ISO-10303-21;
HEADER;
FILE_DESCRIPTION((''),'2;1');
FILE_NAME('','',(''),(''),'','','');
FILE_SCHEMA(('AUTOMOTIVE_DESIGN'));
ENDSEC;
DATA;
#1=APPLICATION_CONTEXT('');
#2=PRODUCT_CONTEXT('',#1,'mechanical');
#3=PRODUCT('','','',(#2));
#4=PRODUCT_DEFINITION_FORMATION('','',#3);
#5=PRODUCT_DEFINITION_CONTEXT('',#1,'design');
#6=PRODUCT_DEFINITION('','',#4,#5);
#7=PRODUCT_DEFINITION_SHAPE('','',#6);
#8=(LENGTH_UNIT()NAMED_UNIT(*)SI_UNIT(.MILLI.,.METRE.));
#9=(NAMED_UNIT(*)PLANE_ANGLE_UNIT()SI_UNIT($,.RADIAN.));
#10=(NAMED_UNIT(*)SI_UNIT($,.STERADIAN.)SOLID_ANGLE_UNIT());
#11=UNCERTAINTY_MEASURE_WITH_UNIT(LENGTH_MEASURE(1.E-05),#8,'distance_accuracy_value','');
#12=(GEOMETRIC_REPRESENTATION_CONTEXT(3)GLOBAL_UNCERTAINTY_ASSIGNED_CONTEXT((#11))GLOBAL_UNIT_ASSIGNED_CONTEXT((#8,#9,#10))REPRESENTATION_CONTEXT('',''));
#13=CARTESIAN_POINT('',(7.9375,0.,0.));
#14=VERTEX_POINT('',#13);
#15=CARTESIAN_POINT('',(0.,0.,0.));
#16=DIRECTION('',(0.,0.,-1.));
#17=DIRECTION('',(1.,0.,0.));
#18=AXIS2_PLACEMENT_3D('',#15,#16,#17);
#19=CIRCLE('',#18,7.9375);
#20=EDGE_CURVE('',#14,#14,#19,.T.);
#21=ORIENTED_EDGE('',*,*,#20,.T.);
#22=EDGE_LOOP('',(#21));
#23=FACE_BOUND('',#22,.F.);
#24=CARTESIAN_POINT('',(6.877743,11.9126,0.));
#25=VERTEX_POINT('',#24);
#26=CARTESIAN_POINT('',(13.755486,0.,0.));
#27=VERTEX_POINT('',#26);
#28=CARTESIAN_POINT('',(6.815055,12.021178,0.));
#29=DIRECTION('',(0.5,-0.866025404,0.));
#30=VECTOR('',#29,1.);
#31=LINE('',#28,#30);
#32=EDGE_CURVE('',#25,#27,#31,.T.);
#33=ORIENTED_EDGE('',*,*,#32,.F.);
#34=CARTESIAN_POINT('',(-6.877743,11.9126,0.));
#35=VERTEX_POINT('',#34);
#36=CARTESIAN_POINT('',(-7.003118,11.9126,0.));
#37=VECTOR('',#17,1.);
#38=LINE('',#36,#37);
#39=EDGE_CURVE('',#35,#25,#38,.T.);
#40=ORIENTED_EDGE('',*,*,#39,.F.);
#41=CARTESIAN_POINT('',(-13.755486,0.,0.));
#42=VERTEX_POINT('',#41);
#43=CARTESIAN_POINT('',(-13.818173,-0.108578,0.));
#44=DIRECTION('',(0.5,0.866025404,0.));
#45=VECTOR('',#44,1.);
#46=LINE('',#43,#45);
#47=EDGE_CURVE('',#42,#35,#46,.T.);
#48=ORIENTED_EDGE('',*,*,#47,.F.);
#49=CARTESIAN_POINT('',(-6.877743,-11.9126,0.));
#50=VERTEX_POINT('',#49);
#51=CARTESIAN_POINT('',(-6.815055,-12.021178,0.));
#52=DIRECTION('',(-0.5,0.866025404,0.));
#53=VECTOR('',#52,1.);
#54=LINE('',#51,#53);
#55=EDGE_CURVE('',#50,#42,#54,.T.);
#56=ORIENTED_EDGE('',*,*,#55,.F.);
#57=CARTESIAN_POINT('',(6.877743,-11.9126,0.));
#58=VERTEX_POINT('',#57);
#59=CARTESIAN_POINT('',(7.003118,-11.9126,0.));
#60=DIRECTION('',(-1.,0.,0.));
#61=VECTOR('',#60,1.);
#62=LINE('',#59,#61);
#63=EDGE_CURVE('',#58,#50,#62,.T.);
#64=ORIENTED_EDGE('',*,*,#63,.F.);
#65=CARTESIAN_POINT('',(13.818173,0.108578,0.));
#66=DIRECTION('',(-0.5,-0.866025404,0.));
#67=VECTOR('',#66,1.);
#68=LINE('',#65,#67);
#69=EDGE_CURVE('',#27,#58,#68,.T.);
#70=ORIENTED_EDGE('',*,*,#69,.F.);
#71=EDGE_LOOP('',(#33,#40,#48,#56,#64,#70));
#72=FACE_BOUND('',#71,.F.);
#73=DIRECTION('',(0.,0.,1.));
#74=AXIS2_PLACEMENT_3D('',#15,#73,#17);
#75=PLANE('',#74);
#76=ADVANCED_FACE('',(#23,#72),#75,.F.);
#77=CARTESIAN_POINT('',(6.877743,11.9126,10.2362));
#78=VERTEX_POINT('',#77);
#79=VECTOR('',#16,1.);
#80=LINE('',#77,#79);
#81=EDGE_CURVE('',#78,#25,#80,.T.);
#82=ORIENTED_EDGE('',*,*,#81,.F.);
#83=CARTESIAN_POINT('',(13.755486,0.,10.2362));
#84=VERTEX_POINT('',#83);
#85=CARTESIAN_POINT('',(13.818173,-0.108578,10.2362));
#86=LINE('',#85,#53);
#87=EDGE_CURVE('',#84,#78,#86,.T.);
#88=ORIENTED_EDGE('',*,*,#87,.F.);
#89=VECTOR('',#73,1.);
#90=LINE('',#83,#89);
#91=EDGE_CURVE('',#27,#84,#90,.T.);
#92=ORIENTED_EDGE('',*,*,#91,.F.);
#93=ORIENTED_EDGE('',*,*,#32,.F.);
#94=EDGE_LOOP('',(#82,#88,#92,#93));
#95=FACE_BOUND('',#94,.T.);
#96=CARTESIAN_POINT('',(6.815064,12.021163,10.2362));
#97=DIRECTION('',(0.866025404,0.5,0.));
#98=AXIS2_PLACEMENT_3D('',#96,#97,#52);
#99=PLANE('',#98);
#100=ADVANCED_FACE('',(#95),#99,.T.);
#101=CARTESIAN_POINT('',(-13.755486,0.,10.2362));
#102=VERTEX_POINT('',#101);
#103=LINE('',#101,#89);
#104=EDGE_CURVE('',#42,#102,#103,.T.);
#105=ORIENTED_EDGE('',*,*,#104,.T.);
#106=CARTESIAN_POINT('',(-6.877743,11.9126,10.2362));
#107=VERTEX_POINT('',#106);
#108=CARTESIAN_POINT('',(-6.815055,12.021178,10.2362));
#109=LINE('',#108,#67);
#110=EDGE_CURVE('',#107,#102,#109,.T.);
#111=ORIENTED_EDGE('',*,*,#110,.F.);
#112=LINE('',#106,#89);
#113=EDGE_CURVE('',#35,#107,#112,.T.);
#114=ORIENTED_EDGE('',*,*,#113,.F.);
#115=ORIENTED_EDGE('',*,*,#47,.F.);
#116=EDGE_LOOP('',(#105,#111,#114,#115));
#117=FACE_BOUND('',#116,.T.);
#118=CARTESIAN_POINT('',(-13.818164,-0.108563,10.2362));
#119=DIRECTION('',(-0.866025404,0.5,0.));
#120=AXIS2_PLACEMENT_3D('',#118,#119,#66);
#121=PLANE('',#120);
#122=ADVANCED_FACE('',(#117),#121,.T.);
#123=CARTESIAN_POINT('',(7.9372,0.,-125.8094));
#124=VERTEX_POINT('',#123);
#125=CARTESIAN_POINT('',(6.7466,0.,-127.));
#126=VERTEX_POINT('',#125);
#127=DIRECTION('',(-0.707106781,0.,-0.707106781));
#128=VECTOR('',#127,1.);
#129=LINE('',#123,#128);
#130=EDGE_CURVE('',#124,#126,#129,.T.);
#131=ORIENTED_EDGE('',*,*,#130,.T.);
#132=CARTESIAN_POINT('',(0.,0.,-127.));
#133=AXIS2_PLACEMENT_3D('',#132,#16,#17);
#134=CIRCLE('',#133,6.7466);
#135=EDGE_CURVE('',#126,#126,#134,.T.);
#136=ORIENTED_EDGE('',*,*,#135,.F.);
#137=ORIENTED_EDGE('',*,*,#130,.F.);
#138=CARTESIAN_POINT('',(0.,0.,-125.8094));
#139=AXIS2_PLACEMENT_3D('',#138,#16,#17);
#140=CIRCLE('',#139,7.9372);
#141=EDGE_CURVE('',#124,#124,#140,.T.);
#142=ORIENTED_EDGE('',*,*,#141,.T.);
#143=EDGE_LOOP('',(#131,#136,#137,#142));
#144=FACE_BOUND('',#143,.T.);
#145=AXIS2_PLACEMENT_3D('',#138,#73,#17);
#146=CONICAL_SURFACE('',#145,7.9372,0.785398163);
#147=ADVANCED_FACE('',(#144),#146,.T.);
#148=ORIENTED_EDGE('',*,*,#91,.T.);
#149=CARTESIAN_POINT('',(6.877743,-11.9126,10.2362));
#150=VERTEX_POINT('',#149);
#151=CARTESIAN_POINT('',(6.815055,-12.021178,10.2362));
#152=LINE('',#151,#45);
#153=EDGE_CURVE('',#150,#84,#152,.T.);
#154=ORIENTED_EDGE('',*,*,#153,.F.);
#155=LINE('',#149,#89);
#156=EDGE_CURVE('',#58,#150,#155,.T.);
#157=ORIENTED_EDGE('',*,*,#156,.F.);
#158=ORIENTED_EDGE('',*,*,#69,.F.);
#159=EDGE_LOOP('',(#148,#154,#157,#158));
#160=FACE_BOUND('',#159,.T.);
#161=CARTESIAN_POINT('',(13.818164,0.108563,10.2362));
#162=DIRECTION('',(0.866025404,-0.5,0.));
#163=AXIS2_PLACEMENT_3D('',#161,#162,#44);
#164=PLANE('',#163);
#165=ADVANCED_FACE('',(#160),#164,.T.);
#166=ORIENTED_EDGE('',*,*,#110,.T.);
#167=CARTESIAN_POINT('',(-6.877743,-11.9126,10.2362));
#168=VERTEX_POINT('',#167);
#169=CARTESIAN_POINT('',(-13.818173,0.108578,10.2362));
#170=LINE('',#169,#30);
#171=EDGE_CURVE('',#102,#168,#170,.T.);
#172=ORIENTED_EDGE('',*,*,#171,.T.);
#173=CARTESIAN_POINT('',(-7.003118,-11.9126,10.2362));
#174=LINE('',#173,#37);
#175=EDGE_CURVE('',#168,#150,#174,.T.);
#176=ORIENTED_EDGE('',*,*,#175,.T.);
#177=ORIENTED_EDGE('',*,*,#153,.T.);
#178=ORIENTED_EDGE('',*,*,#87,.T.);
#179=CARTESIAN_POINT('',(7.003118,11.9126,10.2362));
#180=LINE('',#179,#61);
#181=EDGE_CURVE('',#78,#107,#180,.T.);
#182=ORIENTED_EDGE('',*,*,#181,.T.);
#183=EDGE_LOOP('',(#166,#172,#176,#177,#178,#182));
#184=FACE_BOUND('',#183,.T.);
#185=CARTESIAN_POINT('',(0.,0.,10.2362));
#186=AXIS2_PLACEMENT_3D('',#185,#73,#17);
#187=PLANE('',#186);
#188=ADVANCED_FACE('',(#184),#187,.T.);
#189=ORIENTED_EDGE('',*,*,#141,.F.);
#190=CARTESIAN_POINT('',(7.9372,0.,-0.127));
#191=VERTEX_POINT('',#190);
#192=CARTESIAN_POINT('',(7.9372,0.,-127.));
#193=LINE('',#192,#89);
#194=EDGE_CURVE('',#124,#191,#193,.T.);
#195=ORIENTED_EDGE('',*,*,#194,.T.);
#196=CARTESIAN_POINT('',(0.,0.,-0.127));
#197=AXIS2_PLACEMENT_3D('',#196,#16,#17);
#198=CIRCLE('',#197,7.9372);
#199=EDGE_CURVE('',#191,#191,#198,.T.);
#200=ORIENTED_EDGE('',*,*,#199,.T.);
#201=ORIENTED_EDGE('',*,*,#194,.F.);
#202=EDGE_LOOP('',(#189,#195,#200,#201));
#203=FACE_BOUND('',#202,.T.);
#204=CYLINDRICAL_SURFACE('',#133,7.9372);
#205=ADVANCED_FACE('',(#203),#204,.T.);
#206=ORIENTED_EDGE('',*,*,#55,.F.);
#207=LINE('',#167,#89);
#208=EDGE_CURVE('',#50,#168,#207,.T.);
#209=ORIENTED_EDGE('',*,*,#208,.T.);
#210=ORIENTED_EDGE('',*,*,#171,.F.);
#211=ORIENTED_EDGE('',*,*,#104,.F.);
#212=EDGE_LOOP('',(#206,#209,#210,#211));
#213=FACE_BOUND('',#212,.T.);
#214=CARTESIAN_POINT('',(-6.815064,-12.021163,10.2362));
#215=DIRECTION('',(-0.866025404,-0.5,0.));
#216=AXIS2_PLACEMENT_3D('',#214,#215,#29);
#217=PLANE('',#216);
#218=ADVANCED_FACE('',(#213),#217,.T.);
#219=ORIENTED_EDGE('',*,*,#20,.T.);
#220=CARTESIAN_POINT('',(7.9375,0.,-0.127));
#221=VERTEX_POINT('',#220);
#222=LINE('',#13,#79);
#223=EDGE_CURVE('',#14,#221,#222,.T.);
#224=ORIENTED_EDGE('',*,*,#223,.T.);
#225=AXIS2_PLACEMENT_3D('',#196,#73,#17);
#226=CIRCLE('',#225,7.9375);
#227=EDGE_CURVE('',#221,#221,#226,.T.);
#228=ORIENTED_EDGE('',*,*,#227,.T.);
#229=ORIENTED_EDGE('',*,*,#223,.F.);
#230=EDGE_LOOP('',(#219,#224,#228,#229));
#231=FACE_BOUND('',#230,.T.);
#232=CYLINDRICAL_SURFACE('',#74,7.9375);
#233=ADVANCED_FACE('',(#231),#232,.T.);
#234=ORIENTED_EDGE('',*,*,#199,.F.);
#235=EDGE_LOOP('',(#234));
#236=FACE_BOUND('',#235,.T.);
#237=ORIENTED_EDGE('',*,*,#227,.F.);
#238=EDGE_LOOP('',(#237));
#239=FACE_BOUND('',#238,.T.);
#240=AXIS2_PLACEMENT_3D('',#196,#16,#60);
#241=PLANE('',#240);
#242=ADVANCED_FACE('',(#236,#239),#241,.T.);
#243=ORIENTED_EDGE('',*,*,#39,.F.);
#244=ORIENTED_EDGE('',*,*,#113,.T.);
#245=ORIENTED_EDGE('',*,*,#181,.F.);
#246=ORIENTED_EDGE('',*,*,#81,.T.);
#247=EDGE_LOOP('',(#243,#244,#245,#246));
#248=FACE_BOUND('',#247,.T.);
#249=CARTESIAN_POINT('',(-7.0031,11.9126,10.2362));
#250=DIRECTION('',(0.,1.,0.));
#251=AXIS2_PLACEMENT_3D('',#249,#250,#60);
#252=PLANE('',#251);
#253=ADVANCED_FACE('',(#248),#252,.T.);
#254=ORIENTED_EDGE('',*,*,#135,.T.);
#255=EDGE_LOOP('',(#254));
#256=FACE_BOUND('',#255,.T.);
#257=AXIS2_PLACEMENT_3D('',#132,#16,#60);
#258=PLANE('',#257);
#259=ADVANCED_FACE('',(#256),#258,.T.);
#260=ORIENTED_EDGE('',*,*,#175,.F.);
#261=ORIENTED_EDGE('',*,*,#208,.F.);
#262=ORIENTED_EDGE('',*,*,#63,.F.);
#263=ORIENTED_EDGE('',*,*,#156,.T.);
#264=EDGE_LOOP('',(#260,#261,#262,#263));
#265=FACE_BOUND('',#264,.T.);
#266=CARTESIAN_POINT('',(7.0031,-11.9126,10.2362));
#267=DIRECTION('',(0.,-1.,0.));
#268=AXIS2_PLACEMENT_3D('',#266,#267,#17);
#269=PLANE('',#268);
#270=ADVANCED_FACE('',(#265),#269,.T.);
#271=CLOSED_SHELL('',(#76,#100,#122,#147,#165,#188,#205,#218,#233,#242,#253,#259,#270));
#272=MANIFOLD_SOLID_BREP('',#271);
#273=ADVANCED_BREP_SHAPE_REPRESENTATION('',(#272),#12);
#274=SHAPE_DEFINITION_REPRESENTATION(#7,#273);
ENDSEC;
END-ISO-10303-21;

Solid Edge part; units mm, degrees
sketch "Sketch1" plane through (0, 0, 0) normal (0, 0, 1) x (1, 0, 0)
  circle A0 centre (0, 0) radius 13.8186
  dimension "D1" = 27.6372
extrude "Protrusion1" add sketch "Sketch1" along normal blind 10.2362
sketch "Sketch2" plane through (0, 0, 0) normal (0, 0, -1) x (1, 0, 0)
  circle A0 centre (0, 0) radius 7.9375
extrude "Protrusion2" add sketch "Sketch2" along normal blind 127
sketch "Sketch3" plane through (0, 0, -127) normal (0, 0, -1) x (1, 0, 0)
  circle A0 centre (0, 0) radius 7.9372
extrude "Cutout1" cut sketch "Sketch3" against normal blind 126.873 flip side to cut
chamfer "Chamfer_1" distance 1.1906 angle 45 1 edges at (-7.9372, 0, -127)
sketch "Sketch4" plane through (0, 0, 10.2362) normal (0, 0, 1) x (1, 0, 0)
  line L0 (-7.0031, 11.9126) -> (7.0031, 11.9126)
  dimension "D1" = 23.8252
extrude "Cutout2" cut sketch "Sketch4" against normal up to next material side at (0, 11.9626, 10.2362)
pattern_circular "Pattern1" count 6 over 360 about axis through (0, 0, 10.2362) along (0, 0, 1) of "Cutout2"
properties part number "124221"
